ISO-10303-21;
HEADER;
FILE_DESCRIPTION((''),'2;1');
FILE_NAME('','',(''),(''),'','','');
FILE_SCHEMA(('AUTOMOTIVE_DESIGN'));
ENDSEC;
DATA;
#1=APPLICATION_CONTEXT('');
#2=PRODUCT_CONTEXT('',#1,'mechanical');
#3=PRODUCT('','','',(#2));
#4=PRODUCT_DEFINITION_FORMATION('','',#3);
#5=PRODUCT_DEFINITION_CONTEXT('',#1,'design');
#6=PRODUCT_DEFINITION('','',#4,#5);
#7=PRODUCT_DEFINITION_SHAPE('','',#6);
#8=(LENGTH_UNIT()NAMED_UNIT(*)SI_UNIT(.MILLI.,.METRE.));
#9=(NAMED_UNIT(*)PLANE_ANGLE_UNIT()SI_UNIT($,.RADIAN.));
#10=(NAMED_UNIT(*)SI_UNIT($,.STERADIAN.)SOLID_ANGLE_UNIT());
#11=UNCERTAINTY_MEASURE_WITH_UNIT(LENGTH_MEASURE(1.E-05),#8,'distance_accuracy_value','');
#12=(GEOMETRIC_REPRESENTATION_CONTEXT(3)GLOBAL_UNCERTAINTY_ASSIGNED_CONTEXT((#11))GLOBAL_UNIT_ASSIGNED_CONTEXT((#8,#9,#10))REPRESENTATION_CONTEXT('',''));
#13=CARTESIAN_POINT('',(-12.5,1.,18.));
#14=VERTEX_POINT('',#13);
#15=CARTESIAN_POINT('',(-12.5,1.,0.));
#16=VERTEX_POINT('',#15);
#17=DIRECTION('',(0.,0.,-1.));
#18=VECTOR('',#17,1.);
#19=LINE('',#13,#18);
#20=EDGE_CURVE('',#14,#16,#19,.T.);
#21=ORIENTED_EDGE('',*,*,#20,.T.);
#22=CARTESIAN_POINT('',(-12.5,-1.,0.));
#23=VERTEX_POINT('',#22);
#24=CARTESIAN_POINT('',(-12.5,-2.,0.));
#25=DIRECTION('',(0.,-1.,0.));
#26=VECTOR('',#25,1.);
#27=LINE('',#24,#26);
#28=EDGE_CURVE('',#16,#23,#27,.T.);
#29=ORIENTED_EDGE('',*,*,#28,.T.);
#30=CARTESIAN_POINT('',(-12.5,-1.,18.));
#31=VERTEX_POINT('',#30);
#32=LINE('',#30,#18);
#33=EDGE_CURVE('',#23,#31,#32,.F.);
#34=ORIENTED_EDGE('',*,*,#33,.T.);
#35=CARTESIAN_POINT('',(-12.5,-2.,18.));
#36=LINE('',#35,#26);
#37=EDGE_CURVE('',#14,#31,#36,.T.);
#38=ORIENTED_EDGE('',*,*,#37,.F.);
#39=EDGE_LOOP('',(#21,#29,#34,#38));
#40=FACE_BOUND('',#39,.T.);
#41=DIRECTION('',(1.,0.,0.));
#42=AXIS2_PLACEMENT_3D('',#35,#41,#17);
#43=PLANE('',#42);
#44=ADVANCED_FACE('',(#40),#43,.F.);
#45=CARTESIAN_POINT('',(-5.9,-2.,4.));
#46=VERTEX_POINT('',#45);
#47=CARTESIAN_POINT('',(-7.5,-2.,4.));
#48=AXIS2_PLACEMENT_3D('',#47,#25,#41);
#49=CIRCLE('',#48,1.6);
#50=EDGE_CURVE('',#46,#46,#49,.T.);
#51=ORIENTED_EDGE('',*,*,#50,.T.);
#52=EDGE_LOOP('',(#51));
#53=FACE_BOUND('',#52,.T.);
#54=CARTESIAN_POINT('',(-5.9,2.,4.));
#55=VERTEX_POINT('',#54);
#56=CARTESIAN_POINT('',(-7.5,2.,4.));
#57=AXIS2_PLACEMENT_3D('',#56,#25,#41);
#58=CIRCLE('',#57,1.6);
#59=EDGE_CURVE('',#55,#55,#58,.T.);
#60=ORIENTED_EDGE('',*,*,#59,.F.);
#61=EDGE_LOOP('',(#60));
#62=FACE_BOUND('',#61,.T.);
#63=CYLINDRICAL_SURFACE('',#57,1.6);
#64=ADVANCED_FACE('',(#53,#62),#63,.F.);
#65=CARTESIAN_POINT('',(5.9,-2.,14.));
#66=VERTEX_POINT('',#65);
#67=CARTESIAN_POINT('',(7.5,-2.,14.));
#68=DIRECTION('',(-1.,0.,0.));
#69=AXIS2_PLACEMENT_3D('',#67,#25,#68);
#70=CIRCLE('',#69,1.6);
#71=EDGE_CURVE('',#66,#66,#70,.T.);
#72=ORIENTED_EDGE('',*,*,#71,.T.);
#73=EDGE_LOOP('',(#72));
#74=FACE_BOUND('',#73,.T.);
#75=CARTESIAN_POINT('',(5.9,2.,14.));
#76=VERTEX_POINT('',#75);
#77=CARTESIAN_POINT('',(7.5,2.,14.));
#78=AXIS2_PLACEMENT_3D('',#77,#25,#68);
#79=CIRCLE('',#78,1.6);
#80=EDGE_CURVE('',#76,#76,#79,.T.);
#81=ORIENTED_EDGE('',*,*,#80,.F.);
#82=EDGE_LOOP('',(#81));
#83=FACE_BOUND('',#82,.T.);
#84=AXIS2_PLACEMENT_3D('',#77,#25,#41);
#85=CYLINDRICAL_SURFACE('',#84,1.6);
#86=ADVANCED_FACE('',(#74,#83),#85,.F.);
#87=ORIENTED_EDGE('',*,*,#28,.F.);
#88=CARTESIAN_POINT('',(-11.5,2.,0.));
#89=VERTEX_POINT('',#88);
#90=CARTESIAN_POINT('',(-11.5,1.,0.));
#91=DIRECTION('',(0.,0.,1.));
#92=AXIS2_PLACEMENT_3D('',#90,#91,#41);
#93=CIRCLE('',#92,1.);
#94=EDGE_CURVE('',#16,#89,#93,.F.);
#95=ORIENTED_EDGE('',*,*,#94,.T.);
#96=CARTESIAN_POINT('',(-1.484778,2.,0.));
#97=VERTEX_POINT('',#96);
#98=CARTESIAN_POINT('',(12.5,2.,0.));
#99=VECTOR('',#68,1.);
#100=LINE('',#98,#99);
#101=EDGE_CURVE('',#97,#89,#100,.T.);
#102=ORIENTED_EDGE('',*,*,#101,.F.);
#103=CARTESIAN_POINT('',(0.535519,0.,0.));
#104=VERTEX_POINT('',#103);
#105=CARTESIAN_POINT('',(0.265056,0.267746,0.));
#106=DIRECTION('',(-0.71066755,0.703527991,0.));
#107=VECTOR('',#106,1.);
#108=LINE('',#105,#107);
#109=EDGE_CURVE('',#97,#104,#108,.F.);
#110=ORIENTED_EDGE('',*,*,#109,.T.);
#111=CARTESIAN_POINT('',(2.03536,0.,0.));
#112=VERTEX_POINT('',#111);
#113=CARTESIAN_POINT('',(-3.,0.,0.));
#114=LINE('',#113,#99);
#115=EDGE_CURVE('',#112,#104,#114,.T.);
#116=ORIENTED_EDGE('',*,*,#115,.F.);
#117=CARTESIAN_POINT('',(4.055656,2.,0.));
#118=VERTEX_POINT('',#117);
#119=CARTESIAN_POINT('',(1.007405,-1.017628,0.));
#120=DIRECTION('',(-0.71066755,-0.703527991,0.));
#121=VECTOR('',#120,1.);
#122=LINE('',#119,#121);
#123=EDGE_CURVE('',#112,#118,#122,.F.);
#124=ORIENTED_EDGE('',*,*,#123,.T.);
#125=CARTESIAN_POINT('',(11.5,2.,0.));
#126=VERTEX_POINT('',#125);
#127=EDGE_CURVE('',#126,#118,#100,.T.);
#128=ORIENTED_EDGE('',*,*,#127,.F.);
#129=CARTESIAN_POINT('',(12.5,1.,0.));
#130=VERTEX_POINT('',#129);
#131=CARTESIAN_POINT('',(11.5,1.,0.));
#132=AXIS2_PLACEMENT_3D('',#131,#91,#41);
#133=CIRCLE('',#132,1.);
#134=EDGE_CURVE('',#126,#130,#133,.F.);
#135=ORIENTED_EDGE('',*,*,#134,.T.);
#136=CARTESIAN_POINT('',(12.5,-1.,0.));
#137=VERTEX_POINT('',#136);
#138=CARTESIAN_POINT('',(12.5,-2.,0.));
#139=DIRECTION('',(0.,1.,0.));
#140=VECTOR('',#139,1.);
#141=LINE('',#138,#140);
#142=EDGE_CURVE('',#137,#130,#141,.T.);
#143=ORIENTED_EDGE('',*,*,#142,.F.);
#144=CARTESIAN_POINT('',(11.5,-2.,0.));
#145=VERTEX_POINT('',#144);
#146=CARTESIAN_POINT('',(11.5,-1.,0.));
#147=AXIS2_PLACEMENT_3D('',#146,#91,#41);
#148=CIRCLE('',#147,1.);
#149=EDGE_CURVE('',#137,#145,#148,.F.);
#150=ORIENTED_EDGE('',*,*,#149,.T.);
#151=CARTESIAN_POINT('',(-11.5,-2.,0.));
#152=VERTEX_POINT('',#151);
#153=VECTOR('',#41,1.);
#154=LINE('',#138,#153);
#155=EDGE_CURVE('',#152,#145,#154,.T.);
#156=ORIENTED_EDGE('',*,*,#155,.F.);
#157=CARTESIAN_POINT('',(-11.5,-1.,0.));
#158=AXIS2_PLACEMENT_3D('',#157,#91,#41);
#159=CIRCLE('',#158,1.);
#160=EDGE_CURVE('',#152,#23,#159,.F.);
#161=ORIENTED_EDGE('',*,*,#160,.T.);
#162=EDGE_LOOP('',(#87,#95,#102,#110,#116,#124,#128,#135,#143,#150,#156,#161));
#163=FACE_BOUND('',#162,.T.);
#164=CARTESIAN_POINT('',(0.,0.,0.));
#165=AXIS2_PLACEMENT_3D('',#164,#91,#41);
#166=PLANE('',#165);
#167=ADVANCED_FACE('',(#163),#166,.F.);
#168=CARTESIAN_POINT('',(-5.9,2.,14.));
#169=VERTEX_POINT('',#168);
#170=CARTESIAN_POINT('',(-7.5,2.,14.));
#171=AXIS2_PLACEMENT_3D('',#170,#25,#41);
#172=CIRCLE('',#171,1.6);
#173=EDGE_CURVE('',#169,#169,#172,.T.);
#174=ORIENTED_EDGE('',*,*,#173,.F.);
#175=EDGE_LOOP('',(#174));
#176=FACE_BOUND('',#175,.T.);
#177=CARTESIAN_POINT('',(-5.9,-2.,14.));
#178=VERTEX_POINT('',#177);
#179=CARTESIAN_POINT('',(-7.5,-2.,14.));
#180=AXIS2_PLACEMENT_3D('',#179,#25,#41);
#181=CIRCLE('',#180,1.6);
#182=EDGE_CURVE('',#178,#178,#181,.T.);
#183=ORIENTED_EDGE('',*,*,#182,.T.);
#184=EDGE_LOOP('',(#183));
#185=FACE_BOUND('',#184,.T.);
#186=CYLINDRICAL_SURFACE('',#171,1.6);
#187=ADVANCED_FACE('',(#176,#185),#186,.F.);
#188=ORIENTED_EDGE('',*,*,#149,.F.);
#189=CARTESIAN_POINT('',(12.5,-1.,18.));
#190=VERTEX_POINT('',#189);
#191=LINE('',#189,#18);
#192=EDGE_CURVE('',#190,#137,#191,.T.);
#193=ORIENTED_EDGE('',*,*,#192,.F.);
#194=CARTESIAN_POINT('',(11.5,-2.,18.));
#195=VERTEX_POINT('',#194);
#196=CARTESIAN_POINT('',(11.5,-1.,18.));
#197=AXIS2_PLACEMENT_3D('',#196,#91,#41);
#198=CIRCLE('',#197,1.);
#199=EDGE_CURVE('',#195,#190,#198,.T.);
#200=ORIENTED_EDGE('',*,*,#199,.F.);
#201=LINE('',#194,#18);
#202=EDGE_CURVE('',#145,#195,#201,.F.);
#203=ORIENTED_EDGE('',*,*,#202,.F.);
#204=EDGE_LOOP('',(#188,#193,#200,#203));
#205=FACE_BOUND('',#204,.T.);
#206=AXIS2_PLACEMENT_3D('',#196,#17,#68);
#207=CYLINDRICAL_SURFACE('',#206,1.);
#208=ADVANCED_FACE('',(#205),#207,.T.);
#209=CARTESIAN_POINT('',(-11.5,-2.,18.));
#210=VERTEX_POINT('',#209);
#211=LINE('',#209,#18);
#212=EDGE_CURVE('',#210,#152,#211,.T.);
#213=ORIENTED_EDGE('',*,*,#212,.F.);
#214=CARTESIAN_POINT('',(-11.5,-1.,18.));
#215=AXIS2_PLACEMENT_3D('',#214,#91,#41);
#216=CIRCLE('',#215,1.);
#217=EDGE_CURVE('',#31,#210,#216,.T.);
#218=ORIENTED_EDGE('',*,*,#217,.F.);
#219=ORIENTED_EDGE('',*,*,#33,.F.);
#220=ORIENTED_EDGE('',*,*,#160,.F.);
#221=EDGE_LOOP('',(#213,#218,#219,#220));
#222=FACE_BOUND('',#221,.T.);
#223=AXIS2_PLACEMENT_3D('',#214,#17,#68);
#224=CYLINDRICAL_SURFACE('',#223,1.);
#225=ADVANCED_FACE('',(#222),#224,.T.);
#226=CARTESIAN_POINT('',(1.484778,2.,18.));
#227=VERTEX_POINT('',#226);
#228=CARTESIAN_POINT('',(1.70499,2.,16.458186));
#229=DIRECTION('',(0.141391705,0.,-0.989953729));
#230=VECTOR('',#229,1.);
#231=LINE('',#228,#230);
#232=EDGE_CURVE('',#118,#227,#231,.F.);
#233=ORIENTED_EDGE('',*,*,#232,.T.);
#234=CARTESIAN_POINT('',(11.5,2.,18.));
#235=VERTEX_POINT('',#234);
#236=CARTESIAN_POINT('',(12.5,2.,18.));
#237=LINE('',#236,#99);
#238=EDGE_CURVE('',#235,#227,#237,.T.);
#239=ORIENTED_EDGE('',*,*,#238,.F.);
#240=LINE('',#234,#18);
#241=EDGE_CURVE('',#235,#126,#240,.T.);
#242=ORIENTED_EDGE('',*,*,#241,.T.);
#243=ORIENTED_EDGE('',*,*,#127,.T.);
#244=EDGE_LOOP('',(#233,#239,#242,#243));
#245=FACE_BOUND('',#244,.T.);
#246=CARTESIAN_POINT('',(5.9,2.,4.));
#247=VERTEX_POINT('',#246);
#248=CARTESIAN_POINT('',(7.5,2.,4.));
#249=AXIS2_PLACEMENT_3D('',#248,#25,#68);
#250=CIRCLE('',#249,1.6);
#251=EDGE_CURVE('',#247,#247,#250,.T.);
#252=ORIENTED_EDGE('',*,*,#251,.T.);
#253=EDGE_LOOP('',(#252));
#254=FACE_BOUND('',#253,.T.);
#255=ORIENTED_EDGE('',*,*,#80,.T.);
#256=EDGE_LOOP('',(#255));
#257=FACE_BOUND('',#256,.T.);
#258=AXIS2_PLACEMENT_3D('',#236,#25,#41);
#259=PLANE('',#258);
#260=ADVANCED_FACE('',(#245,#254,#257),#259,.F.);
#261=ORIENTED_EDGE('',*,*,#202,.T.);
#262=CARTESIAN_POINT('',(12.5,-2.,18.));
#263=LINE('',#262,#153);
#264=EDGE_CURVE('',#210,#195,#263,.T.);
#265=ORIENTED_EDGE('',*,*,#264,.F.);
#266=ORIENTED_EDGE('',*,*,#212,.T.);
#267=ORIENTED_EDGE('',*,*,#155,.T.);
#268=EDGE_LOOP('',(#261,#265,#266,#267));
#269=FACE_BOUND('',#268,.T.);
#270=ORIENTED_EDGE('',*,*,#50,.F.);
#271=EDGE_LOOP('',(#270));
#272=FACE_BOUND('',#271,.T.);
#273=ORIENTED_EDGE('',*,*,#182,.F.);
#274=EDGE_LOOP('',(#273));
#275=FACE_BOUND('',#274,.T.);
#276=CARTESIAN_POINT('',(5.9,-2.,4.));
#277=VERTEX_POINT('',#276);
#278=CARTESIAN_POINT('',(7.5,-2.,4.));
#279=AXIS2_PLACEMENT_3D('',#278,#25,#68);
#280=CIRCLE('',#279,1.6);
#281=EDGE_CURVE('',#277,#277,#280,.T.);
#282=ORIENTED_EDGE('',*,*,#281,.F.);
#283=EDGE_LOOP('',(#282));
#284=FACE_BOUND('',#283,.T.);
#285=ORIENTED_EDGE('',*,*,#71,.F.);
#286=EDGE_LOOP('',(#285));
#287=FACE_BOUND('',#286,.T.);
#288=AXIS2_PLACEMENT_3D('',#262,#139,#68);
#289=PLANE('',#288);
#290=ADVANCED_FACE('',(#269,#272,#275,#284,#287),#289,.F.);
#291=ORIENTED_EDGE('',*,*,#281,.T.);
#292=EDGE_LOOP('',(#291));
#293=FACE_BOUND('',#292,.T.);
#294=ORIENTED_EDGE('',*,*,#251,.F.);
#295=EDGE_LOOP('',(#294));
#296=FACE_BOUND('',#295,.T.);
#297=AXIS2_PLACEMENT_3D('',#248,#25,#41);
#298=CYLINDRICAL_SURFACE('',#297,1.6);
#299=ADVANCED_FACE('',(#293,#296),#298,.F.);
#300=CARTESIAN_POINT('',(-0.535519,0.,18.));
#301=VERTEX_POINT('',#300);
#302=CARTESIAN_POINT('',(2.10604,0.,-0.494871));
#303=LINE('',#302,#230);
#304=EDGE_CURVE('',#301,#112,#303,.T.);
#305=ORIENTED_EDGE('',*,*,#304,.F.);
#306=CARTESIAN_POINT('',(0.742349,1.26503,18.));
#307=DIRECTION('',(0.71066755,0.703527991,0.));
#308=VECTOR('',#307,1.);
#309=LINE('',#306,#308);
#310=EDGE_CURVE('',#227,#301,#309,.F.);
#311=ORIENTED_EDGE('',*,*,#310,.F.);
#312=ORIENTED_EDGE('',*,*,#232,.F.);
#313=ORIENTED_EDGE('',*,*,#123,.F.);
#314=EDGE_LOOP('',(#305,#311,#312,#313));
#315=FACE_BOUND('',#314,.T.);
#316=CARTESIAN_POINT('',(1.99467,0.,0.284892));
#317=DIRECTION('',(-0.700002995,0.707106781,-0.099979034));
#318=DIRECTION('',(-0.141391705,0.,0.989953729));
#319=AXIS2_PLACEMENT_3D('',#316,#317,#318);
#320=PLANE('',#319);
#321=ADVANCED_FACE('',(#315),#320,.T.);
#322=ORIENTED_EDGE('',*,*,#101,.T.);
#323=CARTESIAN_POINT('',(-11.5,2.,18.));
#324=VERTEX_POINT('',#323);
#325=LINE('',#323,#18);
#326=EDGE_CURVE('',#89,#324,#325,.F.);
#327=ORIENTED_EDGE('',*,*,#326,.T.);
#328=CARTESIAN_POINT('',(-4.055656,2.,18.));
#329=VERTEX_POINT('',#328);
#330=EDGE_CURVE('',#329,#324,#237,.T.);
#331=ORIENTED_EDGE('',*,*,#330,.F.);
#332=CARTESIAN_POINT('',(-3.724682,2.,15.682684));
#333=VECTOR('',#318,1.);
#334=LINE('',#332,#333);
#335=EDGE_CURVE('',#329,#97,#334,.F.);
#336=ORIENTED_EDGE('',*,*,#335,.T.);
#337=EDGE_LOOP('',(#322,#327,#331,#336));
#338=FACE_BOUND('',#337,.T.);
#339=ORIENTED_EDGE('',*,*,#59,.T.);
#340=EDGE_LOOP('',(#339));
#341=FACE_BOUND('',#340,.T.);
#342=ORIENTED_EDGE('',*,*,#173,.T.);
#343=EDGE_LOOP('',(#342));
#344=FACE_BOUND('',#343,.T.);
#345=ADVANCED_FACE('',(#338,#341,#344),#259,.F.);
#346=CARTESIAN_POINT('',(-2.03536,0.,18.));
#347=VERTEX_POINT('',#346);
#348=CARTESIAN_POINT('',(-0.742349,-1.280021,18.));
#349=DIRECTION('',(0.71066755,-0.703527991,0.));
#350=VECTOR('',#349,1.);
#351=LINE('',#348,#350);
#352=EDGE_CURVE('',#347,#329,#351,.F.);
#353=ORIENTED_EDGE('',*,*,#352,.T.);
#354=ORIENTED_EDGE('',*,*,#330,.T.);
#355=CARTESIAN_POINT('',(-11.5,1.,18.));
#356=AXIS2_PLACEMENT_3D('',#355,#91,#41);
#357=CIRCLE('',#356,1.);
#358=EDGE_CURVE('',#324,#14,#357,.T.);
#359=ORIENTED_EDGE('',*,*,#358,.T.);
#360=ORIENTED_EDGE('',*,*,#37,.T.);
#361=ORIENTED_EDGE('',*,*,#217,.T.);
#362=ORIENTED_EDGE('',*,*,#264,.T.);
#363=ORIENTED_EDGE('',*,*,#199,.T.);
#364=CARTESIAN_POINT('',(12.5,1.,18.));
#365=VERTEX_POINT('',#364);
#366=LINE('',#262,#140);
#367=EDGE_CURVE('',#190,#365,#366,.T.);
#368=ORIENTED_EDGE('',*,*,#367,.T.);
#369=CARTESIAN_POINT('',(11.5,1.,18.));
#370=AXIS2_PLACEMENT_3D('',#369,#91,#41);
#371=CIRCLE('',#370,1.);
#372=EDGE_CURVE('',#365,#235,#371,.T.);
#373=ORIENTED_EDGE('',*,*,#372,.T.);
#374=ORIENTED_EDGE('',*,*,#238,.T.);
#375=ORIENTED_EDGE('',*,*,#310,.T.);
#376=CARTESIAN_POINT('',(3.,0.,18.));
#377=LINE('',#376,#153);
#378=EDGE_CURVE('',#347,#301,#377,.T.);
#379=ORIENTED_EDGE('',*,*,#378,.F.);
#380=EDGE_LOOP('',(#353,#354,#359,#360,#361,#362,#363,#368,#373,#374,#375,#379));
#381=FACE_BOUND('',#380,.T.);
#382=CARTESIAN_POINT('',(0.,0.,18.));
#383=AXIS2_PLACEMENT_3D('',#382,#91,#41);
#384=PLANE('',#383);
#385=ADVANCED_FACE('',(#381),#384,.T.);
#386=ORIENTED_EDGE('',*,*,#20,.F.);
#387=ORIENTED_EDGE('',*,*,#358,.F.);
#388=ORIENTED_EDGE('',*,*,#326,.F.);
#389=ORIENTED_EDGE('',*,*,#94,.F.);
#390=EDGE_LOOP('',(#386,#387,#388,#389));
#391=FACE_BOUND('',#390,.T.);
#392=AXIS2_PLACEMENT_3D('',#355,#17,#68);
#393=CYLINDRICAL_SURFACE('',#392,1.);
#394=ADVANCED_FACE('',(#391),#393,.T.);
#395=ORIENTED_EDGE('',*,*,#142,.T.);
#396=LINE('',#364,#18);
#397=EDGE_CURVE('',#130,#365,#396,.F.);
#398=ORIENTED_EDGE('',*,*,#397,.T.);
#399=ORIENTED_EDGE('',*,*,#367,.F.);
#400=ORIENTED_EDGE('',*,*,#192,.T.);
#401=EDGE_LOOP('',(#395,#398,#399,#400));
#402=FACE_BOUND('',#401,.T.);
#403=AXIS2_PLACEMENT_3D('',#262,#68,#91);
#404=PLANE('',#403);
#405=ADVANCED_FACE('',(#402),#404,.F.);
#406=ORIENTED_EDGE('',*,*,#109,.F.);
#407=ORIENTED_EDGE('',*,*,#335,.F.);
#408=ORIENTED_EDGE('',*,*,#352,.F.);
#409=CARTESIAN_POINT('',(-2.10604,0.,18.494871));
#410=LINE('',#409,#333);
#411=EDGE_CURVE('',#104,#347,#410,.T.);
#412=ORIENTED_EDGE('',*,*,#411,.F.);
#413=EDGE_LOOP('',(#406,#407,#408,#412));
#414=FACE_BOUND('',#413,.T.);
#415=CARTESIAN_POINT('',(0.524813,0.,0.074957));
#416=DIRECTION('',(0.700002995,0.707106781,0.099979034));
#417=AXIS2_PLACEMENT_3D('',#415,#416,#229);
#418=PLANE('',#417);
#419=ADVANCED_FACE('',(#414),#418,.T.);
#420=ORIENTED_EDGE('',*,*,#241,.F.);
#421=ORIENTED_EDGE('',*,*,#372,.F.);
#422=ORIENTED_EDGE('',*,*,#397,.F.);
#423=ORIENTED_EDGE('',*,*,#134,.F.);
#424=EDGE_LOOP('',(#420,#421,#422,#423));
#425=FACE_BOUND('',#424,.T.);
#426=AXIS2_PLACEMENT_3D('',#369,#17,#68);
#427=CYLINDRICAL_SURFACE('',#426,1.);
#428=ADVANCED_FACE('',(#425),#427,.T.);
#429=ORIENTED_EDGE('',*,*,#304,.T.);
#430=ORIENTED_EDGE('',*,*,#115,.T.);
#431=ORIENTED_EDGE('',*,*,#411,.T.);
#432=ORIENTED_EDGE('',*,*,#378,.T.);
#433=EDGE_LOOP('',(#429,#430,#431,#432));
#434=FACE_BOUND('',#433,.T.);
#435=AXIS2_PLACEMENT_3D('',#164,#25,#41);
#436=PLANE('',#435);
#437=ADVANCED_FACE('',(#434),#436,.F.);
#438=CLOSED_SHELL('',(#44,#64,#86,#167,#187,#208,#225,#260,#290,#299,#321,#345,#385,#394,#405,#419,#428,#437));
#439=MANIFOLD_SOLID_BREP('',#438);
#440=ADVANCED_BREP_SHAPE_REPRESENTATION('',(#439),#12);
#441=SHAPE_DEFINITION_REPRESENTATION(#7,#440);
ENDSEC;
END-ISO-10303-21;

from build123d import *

# Parameters (mm, degrees)
SKETCH_1_W          = 25
SKETCH_1_H          = 4
EXTRUDE_1_DEPTH     = 18
FILLET_1_R          = 1
SKETCH_3_R          = 1.6
CUT_EXTRUDE_2_DEPTH = 23.27666941
CUT_EXTRUDE_3_DEPTH = 2
CHAMFER_2_SIZE      = 3.5
CHAMFER_3_SIZE      = 3.5


with BuildPart() as part:
    # 草图1 → 凸台-拉伸1 (new body)
    with BuildSketch(Plane.XY):
        Rectangle(SKETCH_1_W, SKETCH_1_H)
    extrude(amount=EXTRUDE_1_DEPTH)

    # 圆角1
    fillet_1_edges = [part.edges().sort_by_distance(p)[0] for p in [
        (-12.5, 2, 9),
        (12.5, 2, 9),
        (12.5, -2, 9),
        (-12.5, -2, 9),
    ]]
    fillet(fillet_1_edges, radius=FILLET_1_R)

    # 草图3 → 切除-拉伸2 (cut, through all)
    with BuildSketch(Plane.XZ.offset(2)):
        with Locations((-7.5, 14)):
            Circle(SKETCH_3_R)
        with Locations((-7.5, 4)):
            Circle(SKETCH_3_R)
        with Locations(Location((7.5, 4, 0), (0, 0, 180))):
            Circle(SKETCH_3_R)
        with Locations(Location((7.5, 14, 0), (0, 0, 180))):
            Circle(SKETCH_3_R)
    extrude(amount=-CUT_EXTRUDE_2_DEPTH, mode=Mode.SUBTRACT)

    # 草图4 → 切除-拉伸3 (cut)
    with BuildSketch(Plane(origin=(0, 2, 0), x_dir=(1, 0, 0), z_dir=(0, 1, 0))):
        Polygon((5.570878435, 0), (3, -18), (-5.570878435, -18), (-3, 0), align=None)
    extrude(amount=-CUT_EXTRUDE_3_DEPTH, mode=Mode.SUBTRACT)

    # 倒角2
    # the kernel refuses this chamfer: 3.5 mm, written as the material it adds along each edge
    with BuildSketch(Plane(origin=(6.843529685, 0, -8.910465074), x_dir=(0.027219645584784704, 0.9996219169112968, 0.00388768887943796), z_dir=(-0.14139170518175465, 0, 0.9899537290731298))) as chamfer_2_piece_1_section:
        Polygon((CHAMFER_2_SIZE * 0.999621916911, CHAMFER_2_SIZE * 0.0274958766106), (-CHAMFER_2_SIZE * 0.0274958766106, CHAMFER_2_SIZE * 0.999621916911), (0, 0), align=None)
    chamfer_2_piece_1 = extrude(amount=36.184448925, mode=Mode.PRIVATE)
    chamfer_2_piece_1 = split(chamfer_2_piece_1, bisect_by=Plane(origin=(2.941803391, 0.818076093, 0), z_dir=(0, 0, 1)), keep=Keep.TOP, mode=Mode.PRIVATE)
    chamfer_2_piece_1 = split(chamfer_2_piece_1, bisect_by=Plane(origin=(2.941803391, 0.818076093, 18), z_dir=(0, 0, -1)), keep=Keep.TOP, mode=Mode.PRIVATE)
    chamfer_2_piece_1 = split(chamfer_2_piece_1, bisect_by=Plane(origin=(2.941803391, 2, 9), z_dir=(0, -1, 0)), keep=Keep.TOP, mode=Mode.PRIVATE)
    add(chamfer_2_piece_1)

    # 倒角3
    # the kernel refuses this chamfer: 3.5 mm, written as the material it adds along each edge
    with BuildSketch(Plane(origin=(-6.843529685, 0, 26.910465074), x_dir=(-0.02721964558478464, 0.9996219169112968, -0.003887688879437917), z_dir=(0.14139170518175467, 0, -0.9899537290731298))) as chamfer_3_piece_1_section:
        Polygon((CHAMFER_3_SIZE * 0.999621916911, CHAMFER_3_SIZE * 0.0274958766106), (-CHAMFER_3_SIZE * 0.0274958766106, CHAMFER_3_SIZE * 0.999621916911), (0, 0), align=None)
    chamfer_3_piece_1 = extrude(amount=36.184448925, mode=Mode.PRIVATE)
    chamfer_3_piece_1 = split(chamfer_3_piece_1, bisect_by=Plane(origin=(-2.941803391, 2, 9), z_dir=(0, -1, 0)), keep=Keep.TOP, mode=Mode.PRIVATE)
    chamfer_3_piece_1 = split(chamfer_3_piece_1, bisect_by=Plane(origin=(-2.941803391, 0.818076093, 18), z_dir=(0, 0, -1)), keep=Keep.TOP, mode=Mode.PRIVATE)
    chamfer_3_piece_1 = split(chamfer_3_piece_1, bisect_by=Plane(origin=(-2.941803391, 0.818076093, 0), z_dir=(0, 0, 1)), keep=Keep.TOP, mode=Mode.PRIVATE)
    add(chamfer_3_piece_1)


solid = part.part
